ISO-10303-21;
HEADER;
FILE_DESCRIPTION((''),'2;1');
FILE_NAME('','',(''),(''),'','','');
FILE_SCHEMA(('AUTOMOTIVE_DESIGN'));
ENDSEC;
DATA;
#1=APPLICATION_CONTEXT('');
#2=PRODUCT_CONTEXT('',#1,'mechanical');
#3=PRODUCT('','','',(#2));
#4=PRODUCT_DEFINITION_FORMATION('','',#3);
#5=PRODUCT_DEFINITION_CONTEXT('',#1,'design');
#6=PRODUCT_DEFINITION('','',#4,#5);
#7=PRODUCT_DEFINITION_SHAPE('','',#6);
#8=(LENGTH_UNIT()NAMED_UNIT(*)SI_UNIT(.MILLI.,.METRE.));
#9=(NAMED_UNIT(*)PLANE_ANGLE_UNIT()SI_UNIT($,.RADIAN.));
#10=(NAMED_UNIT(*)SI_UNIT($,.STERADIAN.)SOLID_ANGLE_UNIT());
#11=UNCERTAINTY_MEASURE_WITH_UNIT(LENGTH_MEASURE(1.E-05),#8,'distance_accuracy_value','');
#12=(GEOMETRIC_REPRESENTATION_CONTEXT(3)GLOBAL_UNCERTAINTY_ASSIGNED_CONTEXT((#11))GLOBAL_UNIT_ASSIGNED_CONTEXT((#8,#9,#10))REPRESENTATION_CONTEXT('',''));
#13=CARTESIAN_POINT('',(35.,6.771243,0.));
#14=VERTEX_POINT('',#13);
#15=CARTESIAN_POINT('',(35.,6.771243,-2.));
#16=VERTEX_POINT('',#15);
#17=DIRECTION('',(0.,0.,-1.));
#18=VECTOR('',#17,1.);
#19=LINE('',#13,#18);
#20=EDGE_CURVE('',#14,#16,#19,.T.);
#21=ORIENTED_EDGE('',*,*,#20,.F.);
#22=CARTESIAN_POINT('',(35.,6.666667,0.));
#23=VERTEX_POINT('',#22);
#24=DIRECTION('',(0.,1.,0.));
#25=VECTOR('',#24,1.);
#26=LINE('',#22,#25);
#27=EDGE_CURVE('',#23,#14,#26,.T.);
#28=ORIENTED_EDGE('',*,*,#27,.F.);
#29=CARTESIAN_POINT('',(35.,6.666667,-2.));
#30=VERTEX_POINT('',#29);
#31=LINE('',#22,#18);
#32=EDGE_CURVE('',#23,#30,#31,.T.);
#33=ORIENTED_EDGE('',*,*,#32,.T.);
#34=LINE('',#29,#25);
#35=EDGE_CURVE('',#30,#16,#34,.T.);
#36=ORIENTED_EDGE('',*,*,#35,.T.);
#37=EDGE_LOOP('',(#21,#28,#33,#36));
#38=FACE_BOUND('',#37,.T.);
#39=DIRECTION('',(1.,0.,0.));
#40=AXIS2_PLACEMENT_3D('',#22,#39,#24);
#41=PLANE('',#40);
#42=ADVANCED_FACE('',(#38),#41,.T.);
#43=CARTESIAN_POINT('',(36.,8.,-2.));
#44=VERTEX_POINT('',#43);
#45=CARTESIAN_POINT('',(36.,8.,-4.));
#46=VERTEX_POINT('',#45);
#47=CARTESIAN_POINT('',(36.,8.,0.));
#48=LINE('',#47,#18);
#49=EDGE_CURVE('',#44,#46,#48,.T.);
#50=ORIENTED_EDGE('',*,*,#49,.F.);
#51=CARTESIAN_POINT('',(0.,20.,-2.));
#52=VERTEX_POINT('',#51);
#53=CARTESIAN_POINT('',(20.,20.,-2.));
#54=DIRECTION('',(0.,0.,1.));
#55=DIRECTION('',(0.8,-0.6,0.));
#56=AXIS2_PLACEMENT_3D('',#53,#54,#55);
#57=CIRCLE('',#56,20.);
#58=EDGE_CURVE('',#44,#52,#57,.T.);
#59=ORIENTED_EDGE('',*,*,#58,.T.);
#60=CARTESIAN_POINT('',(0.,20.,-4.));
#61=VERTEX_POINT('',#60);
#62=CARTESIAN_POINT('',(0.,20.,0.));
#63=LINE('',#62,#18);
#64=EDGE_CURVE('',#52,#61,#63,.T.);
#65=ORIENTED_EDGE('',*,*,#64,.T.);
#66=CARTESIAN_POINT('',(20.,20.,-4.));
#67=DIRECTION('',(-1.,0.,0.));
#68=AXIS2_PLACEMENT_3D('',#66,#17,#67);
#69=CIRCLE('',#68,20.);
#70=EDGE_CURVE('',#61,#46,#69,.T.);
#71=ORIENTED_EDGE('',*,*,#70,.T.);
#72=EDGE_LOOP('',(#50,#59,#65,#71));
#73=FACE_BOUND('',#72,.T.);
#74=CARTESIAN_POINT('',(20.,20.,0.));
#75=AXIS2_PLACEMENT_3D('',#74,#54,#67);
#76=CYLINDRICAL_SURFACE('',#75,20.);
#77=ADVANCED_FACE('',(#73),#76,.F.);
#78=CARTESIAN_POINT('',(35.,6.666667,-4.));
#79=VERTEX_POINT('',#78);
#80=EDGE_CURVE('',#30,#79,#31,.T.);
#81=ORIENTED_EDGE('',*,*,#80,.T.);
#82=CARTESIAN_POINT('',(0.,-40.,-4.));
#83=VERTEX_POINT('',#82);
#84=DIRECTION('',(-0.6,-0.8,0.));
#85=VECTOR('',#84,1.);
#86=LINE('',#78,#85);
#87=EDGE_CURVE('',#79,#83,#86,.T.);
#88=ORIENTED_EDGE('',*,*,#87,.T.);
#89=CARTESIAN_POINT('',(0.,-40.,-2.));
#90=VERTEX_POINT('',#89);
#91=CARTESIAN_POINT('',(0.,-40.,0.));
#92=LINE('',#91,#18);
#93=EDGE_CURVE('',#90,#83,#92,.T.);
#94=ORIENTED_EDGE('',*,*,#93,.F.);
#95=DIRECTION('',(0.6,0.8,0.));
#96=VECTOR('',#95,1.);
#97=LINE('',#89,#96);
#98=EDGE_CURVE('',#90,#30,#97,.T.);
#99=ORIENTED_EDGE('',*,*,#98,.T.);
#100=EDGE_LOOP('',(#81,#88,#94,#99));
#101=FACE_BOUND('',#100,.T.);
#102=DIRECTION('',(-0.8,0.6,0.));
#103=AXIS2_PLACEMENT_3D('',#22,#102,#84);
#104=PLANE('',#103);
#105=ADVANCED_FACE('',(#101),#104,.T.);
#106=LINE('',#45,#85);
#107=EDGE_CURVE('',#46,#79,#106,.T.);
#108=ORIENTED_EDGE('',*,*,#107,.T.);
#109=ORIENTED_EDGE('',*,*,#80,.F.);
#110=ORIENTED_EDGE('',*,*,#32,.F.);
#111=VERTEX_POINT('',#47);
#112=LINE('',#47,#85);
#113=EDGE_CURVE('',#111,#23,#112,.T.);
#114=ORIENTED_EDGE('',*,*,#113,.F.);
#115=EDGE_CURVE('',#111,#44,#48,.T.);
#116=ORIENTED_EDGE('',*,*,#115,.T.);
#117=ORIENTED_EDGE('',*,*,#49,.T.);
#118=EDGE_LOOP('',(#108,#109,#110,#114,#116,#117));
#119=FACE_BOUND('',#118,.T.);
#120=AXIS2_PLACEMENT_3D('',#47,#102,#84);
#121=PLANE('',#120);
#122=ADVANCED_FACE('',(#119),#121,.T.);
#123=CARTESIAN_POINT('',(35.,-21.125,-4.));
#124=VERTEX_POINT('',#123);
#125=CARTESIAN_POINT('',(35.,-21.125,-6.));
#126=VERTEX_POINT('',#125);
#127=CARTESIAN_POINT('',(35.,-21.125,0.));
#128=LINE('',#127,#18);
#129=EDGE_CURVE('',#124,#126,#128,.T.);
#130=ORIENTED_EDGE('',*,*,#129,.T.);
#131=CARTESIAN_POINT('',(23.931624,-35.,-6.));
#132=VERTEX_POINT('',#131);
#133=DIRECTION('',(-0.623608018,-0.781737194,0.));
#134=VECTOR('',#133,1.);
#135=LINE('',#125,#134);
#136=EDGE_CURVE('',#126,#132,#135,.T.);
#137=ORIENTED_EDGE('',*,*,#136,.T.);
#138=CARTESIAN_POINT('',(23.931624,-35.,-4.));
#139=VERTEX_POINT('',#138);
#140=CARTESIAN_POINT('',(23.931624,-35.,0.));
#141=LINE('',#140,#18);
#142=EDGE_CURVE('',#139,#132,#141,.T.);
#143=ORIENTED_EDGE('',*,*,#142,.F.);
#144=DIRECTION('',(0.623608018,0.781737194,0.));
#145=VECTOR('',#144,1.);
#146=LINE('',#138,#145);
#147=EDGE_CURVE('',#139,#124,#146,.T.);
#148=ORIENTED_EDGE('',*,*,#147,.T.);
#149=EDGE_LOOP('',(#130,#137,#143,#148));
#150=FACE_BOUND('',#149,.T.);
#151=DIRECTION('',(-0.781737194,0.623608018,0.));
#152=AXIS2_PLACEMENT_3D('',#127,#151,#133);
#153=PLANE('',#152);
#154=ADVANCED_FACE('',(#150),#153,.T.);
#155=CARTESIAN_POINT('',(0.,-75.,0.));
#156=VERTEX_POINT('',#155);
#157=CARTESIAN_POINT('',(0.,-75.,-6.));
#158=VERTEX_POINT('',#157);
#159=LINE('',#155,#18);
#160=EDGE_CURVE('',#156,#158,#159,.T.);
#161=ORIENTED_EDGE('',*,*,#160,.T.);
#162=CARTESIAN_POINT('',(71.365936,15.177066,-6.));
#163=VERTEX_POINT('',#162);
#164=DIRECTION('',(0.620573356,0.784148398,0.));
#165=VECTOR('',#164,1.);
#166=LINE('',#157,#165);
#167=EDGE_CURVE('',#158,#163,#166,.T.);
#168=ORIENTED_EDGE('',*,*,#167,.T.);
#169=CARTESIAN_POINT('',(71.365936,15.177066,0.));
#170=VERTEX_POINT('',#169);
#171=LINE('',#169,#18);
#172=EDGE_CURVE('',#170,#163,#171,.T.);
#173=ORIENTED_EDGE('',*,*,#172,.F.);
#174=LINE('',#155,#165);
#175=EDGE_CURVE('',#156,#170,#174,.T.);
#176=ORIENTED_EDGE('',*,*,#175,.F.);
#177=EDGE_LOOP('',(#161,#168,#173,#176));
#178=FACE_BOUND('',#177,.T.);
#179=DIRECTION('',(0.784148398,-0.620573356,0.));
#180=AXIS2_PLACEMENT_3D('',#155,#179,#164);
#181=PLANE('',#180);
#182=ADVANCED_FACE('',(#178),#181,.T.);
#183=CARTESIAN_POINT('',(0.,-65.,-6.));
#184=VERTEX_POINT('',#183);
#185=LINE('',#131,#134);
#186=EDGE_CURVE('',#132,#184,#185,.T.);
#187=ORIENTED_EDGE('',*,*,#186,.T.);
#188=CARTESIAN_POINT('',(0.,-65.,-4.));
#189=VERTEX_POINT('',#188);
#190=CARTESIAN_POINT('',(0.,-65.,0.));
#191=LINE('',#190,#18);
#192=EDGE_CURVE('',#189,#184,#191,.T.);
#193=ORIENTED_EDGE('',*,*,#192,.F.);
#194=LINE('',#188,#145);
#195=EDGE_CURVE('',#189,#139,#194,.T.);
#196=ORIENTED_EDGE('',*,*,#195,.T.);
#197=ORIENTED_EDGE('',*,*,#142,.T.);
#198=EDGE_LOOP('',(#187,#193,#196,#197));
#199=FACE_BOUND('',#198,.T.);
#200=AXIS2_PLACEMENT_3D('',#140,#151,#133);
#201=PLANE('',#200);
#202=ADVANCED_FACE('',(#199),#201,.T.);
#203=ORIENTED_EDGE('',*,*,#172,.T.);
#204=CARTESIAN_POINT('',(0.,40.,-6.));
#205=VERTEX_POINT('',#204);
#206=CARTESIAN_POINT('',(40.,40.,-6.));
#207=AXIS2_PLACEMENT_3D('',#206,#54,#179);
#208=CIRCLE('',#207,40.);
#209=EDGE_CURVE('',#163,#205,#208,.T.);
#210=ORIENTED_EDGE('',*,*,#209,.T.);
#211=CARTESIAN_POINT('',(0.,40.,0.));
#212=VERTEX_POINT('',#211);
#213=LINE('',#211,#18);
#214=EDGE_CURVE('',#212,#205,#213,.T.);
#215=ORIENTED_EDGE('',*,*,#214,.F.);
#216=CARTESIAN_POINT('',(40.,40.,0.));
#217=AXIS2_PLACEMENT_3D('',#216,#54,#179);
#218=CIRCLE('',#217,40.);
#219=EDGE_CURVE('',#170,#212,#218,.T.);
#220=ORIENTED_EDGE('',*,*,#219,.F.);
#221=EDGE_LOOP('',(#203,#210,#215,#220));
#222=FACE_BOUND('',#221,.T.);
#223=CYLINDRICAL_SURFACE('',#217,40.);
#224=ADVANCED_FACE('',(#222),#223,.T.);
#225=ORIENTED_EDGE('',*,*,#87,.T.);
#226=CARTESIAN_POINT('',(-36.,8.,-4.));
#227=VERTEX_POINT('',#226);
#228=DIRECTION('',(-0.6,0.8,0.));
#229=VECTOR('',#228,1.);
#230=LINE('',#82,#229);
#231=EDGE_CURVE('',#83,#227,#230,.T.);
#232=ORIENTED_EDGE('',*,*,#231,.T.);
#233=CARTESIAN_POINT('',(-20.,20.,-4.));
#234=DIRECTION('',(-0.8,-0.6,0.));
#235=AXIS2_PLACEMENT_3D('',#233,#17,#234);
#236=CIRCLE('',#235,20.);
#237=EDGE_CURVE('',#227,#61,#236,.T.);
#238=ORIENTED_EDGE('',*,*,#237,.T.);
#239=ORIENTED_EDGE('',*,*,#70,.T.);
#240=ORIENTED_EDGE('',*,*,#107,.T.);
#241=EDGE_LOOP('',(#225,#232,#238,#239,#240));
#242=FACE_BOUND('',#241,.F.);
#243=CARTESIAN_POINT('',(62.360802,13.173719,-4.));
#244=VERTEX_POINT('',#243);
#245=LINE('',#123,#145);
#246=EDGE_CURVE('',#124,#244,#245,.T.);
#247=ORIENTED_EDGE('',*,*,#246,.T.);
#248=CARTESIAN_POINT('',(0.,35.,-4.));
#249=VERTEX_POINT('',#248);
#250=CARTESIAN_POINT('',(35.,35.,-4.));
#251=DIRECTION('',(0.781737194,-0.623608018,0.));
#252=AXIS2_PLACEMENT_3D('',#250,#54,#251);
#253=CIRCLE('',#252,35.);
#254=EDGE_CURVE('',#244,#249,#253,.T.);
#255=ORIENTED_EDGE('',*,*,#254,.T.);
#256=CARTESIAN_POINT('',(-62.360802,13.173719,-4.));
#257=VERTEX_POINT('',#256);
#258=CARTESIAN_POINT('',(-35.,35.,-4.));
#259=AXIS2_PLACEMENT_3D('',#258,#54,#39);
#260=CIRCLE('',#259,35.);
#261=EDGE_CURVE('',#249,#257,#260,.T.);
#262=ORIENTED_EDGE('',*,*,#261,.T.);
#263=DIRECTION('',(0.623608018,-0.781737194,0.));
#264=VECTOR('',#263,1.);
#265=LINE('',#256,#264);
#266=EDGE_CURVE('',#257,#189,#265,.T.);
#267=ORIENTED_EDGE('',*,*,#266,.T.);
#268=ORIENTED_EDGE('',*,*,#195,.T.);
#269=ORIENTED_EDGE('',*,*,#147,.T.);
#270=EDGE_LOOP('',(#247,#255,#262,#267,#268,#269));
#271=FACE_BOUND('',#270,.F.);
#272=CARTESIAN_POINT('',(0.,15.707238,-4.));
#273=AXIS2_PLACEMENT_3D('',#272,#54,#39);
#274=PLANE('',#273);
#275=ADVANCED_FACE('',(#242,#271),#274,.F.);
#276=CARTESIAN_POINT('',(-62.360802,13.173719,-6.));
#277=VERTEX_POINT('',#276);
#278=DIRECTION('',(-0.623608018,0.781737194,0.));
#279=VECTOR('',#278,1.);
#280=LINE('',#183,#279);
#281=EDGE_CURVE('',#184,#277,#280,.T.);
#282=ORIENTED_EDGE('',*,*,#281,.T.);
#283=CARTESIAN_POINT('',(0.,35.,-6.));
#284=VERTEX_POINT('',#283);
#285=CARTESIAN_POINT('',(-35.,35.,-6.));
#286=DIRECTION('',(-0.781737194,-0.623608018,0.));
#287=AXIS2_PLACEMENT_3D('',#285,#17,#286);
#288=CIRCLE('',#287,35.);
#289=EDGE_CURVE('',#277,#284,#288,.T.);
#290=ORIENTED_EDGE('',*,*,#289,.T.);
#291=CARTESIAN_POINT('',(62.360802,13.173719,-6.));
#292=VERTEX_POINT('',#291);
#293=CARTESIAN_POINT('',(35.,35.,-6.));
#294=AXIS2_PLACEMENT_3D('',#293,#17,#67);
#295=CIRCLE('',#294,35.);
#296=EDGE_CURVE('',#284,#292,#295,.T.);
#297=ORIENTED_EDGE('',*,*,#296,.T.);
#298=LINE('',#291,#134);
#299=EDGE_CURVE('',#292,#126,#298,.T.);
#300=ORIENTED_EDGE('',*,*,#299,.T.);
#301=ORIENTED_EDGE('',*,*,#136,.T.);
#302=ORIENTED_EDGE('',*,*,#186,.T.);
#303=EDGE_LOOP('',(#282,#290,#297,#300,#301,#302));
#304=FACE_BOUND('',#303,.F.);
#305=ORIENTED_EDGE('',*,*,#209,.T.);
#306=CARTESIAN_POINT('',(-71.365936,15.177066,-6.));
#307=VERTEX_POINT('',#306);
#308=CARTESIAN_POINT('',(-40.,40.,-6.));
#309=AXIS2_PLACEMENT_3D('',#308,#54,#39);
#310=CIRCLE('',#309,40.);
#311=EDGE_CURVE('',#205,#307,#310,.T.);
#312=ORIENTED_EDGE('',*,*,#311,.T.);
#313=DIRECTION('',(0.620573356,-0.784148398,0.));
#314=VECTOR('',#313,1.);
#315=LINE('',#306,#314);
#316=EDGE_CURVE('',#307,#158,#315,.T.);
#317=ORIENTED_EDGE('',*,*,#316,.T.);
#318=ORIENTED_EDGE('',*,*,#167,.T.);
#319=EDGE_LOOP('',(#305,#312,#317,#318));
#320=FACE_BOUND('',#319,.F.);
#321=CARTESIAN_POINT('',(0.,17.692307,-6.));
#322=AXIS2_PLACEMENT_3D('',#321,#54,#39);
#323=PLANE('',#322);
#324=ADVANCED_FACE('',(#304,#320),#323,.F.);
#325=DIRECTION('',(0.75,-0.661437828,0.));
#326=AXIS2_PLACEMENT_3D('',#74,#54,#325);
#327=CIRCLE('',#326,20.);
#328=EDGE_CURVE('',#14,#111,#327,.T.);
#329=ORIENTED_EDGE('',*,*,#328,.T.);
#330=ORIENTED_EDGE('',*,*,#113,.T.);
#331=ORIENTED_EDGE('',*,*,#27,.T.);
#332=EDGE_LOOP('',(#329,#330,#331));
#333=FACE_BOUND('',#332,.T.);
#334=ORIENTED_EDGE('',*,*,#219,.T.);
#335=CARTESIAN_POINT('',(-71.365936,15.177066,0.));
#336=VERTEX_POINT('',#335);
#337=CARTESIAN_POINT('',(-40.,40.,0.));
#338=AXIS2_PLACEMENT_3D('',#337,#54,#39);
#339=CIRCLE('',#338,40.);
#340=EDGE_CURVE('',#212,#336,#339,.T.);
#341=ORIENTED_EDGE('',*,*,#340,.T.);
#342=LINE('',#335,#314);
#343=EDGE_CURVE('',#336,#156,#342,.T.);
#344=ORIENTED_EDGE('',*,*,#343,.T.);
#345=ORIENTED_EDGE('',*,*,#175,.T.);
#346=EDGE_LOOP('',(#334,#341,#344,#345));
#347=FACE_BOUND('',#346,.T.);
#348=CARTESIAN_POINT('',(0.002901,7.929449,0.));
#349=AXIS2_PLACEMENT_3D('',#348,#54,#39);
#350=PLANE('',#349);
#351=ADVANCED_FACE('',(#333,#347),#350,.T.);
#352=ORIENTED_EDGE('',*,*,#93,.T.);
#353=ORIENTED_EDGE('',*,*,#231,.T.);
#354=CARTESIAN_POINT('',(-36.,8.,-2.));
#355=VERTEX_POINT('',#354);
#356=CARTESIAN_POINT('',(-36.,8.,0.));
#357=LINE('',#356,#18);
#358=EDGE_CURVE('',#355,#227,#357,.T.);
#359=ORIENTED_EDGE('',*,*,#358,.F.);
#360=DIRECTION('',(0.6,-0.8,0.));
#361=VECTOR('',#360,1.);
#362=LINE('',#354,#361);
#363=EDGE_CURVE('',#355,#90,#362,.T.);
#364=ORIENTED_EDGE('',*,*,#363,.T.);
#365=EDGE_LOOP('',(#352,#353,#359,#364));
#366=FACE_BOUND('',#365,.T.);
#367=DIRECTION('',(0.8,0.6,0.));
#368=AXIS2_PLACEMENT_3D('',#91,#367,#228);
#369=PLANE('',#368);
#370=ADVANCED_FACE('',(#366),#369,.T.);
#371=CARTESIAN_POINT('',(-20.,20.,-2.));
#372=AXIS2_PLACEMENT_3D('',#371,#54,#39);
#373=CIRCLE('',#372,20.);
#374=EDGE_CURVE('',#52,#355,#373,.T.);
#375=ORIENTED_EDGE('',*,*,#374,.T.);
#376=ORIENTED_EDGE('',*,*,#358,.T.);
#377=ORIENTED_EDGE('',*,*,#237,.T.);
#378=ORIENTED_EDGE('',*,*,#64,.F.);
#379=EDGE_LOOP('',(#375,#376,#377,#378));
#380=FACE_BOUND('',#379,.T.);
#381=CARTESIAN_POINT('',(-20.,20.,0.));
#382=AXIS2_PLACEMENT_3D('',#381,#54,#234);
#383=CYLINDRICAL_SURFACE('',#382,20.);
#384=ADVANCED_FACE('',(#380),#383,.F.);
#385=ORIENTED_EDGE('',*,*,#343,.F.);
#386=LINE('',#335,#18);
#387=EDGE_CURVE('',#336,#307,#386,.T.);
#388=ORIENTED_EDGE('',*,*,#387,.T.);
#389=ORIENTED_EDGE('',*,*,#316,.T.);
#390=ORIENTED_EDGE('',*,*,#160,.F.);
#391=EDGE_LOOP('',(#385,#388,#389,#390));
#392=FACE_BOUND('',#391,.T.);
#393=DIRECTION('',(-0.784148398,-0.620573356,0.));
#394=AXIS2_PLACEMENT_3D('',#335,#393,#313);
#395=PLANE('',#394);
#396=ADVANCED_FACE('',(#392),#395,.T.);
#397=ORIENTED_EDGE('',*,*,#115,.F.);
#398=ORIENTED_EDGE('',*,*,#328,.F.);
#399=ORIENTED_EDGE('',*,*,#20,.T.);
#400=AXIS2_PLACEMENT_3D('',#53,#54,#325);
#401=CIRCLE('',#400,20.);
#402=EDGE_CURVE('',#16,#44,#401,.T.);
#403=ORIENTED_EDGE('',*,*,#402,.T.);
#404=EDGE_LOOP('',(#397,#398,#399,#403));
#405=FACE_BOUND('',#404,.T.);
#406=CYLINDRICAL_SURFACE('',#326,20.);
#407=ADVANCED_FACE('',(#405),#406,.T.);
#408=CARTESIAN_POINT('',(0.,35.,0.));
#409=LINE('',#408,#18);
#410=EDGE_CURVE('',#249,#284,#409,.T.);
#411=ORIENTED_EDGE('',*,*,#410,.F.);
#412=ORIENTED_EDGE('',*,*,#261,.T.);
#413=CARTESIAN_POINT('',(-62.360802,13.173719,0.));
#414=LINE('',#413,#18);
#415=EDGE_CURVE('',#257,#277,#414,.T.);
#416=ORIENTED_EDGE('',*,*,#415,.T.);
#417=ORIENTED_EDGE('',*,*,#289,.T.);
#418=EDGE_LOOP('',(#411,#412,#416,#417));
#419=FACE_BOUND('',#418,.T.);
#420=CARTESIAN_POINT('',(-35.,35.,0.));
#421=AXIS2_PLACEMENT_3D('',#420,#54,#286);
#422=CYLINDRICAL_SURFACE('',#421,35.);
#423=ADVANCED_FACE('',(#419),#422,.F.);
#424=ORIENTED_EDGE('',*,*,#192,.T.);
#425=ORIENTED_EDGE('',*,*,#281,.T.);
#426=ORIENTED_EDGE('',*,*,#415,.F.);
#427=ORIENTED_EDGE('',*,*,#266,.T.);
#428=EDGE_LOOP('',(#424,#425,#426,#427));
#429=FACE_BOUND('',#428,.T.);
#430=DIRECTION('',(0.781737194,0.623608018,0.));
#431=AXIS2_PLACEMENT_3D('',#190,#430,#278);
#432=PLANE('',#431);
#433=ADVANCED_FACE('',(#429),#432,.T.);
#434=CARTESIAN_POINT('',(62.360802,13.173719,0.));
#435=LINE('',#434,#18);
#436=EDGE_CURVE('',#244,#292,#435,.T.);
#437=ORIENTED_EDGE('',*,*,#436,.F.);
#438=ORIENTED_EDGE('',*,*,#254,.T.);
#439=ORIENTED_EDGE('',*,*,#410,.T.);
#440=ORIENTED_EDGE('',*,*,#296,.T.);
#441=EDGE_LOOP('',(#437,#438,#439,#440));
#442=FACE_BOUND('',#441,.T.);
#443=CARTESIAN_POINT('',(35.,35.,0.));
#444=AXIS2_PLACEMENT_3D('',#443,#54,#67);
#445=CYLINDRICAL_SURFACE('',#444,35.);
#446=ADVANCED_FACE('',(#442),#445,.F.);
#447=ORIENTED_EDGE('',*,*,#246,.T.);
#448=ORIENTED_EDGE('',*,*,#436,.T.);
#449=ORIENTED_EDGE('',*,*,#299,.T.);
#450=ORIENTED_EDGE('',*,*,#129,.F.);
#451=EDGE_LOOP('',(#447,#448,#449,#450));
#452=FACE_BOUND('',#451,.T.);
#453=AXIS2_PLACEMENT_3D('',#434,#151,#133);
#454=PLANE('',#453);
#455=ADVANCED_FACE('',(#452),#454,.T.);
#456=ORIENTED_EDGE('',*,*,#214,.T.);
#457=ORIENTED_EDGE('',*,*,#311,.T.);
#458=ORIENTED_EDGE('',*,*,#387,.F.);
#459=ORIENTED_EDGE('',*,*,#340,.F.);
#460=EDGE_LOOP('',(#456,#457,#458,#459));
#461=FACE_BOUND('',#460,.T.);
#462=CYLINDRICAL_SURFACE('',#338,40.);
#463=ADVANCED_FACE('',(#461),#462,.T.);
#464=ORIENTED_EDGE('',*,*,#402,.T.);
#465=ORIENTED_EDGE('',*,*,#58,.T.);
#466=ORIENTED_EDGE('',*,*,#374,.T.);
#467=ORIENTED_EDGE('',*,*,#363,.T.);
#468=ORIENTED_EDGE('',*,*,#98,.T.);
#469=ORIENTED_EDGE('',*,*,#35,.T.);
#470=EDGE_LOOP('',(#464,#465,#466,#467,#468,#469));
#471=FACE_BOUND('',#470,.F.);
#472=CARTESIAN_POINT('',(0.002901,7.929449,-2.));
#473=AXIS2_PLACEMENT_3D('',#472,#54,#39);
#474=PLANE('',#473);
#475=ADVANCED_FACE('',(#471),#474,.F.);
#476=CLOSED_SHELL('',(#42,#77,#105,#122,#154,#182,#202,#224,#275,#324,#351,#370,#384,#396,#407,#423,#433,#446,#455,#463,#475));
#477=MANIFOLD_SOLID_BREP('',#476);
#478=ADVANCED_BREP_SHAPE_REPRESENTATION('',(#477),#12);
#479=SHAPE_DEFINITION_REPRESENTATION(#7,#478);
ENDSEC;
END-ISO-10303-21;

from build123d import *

# Parameters (mm, degrees)
F1_DEPTH = 6
F2_DEPTH = 4
F3_DEPTH = 2


with BuildPart() as f1:
    # F0 (on Top) → F1 (new body)
    with BuildSketch(Plane.XY):
        with BuildLine():
            Line((0, -75), (71.3659359191, 15.1770657673))
            ThreePointArc((71.3659359191, 15.1770657673), (53.1408249977, 77.7798718682), (0, 40))
            ThreePointArc((0, 40), (-53.1408249977, 77.7798718682), (-71.3659359191, 15.1770657673))
            Line((-71.3659359191, 15.1770657673), (0, -75))
        make_face()
        with BuildLine():
            ThreePointArc((-62.3608017817, 13.1737193764), (-46.5622648655, 68.0350424728), (0, 35))
            ThreePointArc((0, 35), (46.5622648655, 68.0350424728), (62.3608017817, 13.1737193764))
            Line((62.3608017817, 13.1737193764), (35, -21.125))
            Line((35, -21.125), (23.9316239316, -35))
            Line((23.9316239316, -35), (0, -65))
            Line((0, -65), (-62.3608017817, 13.1737193764))
        make_face(mode=Mode.SUBTRACT)
    extrude(amount=-F1_DEPTH)

    # F0 (on Top) → F2 (join)
    with BuildSketch(Plane.XY):
        with BuildLine():
            ThreePointArc((62.3608017817, 13.1737193764), (46.5622648655, 68.0350424728), (0, 35))
            ThreePointArc((0, 35), (-46.5622648655, 68.0350424728), (-62.3608017817, 13.1737193764))
            Line((-62.3608017817, 13.1737193764), (0, -65))
            Line((0, -65), (23.9316239316, -35))
            Line((23.9316239316, -35), (35, -21.125))
            Line((35, -21.125), (62.3608017817, 13.1737193764))
        make_face()
        with BuildLine():
            Line((35, 6.6666666667), (0, -40))
            Line((0, -40), (-36, 8))
            ThreePointArc((-36, 8), (-26.3245553203, 38.973665961), (0, 20))
            ThreePointArc((0, 20), (26.3245553203, 38.973665961), (36, 8))
            Line((36, 8), (35, 6.6666666667))
        make_face(mode=Mode.SUBTRACT)
    extrude(amount=-F2_DEPTH)

    # F0 (on Top) → F3 (join)
    with BuildSketch(Plane.XY):
        with BuildLine():
            Line((-36, 8), (0, -40))
            Line((0, -40), (35, 6.6666666667))
            Line((35, 6.6666666667), (35, 6.7712434447))
            ThreePointArc((35, 6.7712434447), (35.5121713718, 7.3757162844), (36, 8))
            ThreePointArc((36, 8), (26.3245553203, 38.973665961), (0, 20))
            ThreePointArc((0, 20), (-26.3245553203, 38.973665961), (-36, 8))
        make_face()
    extrude(amount=-F3_DEPTH)


solid = f1.part
